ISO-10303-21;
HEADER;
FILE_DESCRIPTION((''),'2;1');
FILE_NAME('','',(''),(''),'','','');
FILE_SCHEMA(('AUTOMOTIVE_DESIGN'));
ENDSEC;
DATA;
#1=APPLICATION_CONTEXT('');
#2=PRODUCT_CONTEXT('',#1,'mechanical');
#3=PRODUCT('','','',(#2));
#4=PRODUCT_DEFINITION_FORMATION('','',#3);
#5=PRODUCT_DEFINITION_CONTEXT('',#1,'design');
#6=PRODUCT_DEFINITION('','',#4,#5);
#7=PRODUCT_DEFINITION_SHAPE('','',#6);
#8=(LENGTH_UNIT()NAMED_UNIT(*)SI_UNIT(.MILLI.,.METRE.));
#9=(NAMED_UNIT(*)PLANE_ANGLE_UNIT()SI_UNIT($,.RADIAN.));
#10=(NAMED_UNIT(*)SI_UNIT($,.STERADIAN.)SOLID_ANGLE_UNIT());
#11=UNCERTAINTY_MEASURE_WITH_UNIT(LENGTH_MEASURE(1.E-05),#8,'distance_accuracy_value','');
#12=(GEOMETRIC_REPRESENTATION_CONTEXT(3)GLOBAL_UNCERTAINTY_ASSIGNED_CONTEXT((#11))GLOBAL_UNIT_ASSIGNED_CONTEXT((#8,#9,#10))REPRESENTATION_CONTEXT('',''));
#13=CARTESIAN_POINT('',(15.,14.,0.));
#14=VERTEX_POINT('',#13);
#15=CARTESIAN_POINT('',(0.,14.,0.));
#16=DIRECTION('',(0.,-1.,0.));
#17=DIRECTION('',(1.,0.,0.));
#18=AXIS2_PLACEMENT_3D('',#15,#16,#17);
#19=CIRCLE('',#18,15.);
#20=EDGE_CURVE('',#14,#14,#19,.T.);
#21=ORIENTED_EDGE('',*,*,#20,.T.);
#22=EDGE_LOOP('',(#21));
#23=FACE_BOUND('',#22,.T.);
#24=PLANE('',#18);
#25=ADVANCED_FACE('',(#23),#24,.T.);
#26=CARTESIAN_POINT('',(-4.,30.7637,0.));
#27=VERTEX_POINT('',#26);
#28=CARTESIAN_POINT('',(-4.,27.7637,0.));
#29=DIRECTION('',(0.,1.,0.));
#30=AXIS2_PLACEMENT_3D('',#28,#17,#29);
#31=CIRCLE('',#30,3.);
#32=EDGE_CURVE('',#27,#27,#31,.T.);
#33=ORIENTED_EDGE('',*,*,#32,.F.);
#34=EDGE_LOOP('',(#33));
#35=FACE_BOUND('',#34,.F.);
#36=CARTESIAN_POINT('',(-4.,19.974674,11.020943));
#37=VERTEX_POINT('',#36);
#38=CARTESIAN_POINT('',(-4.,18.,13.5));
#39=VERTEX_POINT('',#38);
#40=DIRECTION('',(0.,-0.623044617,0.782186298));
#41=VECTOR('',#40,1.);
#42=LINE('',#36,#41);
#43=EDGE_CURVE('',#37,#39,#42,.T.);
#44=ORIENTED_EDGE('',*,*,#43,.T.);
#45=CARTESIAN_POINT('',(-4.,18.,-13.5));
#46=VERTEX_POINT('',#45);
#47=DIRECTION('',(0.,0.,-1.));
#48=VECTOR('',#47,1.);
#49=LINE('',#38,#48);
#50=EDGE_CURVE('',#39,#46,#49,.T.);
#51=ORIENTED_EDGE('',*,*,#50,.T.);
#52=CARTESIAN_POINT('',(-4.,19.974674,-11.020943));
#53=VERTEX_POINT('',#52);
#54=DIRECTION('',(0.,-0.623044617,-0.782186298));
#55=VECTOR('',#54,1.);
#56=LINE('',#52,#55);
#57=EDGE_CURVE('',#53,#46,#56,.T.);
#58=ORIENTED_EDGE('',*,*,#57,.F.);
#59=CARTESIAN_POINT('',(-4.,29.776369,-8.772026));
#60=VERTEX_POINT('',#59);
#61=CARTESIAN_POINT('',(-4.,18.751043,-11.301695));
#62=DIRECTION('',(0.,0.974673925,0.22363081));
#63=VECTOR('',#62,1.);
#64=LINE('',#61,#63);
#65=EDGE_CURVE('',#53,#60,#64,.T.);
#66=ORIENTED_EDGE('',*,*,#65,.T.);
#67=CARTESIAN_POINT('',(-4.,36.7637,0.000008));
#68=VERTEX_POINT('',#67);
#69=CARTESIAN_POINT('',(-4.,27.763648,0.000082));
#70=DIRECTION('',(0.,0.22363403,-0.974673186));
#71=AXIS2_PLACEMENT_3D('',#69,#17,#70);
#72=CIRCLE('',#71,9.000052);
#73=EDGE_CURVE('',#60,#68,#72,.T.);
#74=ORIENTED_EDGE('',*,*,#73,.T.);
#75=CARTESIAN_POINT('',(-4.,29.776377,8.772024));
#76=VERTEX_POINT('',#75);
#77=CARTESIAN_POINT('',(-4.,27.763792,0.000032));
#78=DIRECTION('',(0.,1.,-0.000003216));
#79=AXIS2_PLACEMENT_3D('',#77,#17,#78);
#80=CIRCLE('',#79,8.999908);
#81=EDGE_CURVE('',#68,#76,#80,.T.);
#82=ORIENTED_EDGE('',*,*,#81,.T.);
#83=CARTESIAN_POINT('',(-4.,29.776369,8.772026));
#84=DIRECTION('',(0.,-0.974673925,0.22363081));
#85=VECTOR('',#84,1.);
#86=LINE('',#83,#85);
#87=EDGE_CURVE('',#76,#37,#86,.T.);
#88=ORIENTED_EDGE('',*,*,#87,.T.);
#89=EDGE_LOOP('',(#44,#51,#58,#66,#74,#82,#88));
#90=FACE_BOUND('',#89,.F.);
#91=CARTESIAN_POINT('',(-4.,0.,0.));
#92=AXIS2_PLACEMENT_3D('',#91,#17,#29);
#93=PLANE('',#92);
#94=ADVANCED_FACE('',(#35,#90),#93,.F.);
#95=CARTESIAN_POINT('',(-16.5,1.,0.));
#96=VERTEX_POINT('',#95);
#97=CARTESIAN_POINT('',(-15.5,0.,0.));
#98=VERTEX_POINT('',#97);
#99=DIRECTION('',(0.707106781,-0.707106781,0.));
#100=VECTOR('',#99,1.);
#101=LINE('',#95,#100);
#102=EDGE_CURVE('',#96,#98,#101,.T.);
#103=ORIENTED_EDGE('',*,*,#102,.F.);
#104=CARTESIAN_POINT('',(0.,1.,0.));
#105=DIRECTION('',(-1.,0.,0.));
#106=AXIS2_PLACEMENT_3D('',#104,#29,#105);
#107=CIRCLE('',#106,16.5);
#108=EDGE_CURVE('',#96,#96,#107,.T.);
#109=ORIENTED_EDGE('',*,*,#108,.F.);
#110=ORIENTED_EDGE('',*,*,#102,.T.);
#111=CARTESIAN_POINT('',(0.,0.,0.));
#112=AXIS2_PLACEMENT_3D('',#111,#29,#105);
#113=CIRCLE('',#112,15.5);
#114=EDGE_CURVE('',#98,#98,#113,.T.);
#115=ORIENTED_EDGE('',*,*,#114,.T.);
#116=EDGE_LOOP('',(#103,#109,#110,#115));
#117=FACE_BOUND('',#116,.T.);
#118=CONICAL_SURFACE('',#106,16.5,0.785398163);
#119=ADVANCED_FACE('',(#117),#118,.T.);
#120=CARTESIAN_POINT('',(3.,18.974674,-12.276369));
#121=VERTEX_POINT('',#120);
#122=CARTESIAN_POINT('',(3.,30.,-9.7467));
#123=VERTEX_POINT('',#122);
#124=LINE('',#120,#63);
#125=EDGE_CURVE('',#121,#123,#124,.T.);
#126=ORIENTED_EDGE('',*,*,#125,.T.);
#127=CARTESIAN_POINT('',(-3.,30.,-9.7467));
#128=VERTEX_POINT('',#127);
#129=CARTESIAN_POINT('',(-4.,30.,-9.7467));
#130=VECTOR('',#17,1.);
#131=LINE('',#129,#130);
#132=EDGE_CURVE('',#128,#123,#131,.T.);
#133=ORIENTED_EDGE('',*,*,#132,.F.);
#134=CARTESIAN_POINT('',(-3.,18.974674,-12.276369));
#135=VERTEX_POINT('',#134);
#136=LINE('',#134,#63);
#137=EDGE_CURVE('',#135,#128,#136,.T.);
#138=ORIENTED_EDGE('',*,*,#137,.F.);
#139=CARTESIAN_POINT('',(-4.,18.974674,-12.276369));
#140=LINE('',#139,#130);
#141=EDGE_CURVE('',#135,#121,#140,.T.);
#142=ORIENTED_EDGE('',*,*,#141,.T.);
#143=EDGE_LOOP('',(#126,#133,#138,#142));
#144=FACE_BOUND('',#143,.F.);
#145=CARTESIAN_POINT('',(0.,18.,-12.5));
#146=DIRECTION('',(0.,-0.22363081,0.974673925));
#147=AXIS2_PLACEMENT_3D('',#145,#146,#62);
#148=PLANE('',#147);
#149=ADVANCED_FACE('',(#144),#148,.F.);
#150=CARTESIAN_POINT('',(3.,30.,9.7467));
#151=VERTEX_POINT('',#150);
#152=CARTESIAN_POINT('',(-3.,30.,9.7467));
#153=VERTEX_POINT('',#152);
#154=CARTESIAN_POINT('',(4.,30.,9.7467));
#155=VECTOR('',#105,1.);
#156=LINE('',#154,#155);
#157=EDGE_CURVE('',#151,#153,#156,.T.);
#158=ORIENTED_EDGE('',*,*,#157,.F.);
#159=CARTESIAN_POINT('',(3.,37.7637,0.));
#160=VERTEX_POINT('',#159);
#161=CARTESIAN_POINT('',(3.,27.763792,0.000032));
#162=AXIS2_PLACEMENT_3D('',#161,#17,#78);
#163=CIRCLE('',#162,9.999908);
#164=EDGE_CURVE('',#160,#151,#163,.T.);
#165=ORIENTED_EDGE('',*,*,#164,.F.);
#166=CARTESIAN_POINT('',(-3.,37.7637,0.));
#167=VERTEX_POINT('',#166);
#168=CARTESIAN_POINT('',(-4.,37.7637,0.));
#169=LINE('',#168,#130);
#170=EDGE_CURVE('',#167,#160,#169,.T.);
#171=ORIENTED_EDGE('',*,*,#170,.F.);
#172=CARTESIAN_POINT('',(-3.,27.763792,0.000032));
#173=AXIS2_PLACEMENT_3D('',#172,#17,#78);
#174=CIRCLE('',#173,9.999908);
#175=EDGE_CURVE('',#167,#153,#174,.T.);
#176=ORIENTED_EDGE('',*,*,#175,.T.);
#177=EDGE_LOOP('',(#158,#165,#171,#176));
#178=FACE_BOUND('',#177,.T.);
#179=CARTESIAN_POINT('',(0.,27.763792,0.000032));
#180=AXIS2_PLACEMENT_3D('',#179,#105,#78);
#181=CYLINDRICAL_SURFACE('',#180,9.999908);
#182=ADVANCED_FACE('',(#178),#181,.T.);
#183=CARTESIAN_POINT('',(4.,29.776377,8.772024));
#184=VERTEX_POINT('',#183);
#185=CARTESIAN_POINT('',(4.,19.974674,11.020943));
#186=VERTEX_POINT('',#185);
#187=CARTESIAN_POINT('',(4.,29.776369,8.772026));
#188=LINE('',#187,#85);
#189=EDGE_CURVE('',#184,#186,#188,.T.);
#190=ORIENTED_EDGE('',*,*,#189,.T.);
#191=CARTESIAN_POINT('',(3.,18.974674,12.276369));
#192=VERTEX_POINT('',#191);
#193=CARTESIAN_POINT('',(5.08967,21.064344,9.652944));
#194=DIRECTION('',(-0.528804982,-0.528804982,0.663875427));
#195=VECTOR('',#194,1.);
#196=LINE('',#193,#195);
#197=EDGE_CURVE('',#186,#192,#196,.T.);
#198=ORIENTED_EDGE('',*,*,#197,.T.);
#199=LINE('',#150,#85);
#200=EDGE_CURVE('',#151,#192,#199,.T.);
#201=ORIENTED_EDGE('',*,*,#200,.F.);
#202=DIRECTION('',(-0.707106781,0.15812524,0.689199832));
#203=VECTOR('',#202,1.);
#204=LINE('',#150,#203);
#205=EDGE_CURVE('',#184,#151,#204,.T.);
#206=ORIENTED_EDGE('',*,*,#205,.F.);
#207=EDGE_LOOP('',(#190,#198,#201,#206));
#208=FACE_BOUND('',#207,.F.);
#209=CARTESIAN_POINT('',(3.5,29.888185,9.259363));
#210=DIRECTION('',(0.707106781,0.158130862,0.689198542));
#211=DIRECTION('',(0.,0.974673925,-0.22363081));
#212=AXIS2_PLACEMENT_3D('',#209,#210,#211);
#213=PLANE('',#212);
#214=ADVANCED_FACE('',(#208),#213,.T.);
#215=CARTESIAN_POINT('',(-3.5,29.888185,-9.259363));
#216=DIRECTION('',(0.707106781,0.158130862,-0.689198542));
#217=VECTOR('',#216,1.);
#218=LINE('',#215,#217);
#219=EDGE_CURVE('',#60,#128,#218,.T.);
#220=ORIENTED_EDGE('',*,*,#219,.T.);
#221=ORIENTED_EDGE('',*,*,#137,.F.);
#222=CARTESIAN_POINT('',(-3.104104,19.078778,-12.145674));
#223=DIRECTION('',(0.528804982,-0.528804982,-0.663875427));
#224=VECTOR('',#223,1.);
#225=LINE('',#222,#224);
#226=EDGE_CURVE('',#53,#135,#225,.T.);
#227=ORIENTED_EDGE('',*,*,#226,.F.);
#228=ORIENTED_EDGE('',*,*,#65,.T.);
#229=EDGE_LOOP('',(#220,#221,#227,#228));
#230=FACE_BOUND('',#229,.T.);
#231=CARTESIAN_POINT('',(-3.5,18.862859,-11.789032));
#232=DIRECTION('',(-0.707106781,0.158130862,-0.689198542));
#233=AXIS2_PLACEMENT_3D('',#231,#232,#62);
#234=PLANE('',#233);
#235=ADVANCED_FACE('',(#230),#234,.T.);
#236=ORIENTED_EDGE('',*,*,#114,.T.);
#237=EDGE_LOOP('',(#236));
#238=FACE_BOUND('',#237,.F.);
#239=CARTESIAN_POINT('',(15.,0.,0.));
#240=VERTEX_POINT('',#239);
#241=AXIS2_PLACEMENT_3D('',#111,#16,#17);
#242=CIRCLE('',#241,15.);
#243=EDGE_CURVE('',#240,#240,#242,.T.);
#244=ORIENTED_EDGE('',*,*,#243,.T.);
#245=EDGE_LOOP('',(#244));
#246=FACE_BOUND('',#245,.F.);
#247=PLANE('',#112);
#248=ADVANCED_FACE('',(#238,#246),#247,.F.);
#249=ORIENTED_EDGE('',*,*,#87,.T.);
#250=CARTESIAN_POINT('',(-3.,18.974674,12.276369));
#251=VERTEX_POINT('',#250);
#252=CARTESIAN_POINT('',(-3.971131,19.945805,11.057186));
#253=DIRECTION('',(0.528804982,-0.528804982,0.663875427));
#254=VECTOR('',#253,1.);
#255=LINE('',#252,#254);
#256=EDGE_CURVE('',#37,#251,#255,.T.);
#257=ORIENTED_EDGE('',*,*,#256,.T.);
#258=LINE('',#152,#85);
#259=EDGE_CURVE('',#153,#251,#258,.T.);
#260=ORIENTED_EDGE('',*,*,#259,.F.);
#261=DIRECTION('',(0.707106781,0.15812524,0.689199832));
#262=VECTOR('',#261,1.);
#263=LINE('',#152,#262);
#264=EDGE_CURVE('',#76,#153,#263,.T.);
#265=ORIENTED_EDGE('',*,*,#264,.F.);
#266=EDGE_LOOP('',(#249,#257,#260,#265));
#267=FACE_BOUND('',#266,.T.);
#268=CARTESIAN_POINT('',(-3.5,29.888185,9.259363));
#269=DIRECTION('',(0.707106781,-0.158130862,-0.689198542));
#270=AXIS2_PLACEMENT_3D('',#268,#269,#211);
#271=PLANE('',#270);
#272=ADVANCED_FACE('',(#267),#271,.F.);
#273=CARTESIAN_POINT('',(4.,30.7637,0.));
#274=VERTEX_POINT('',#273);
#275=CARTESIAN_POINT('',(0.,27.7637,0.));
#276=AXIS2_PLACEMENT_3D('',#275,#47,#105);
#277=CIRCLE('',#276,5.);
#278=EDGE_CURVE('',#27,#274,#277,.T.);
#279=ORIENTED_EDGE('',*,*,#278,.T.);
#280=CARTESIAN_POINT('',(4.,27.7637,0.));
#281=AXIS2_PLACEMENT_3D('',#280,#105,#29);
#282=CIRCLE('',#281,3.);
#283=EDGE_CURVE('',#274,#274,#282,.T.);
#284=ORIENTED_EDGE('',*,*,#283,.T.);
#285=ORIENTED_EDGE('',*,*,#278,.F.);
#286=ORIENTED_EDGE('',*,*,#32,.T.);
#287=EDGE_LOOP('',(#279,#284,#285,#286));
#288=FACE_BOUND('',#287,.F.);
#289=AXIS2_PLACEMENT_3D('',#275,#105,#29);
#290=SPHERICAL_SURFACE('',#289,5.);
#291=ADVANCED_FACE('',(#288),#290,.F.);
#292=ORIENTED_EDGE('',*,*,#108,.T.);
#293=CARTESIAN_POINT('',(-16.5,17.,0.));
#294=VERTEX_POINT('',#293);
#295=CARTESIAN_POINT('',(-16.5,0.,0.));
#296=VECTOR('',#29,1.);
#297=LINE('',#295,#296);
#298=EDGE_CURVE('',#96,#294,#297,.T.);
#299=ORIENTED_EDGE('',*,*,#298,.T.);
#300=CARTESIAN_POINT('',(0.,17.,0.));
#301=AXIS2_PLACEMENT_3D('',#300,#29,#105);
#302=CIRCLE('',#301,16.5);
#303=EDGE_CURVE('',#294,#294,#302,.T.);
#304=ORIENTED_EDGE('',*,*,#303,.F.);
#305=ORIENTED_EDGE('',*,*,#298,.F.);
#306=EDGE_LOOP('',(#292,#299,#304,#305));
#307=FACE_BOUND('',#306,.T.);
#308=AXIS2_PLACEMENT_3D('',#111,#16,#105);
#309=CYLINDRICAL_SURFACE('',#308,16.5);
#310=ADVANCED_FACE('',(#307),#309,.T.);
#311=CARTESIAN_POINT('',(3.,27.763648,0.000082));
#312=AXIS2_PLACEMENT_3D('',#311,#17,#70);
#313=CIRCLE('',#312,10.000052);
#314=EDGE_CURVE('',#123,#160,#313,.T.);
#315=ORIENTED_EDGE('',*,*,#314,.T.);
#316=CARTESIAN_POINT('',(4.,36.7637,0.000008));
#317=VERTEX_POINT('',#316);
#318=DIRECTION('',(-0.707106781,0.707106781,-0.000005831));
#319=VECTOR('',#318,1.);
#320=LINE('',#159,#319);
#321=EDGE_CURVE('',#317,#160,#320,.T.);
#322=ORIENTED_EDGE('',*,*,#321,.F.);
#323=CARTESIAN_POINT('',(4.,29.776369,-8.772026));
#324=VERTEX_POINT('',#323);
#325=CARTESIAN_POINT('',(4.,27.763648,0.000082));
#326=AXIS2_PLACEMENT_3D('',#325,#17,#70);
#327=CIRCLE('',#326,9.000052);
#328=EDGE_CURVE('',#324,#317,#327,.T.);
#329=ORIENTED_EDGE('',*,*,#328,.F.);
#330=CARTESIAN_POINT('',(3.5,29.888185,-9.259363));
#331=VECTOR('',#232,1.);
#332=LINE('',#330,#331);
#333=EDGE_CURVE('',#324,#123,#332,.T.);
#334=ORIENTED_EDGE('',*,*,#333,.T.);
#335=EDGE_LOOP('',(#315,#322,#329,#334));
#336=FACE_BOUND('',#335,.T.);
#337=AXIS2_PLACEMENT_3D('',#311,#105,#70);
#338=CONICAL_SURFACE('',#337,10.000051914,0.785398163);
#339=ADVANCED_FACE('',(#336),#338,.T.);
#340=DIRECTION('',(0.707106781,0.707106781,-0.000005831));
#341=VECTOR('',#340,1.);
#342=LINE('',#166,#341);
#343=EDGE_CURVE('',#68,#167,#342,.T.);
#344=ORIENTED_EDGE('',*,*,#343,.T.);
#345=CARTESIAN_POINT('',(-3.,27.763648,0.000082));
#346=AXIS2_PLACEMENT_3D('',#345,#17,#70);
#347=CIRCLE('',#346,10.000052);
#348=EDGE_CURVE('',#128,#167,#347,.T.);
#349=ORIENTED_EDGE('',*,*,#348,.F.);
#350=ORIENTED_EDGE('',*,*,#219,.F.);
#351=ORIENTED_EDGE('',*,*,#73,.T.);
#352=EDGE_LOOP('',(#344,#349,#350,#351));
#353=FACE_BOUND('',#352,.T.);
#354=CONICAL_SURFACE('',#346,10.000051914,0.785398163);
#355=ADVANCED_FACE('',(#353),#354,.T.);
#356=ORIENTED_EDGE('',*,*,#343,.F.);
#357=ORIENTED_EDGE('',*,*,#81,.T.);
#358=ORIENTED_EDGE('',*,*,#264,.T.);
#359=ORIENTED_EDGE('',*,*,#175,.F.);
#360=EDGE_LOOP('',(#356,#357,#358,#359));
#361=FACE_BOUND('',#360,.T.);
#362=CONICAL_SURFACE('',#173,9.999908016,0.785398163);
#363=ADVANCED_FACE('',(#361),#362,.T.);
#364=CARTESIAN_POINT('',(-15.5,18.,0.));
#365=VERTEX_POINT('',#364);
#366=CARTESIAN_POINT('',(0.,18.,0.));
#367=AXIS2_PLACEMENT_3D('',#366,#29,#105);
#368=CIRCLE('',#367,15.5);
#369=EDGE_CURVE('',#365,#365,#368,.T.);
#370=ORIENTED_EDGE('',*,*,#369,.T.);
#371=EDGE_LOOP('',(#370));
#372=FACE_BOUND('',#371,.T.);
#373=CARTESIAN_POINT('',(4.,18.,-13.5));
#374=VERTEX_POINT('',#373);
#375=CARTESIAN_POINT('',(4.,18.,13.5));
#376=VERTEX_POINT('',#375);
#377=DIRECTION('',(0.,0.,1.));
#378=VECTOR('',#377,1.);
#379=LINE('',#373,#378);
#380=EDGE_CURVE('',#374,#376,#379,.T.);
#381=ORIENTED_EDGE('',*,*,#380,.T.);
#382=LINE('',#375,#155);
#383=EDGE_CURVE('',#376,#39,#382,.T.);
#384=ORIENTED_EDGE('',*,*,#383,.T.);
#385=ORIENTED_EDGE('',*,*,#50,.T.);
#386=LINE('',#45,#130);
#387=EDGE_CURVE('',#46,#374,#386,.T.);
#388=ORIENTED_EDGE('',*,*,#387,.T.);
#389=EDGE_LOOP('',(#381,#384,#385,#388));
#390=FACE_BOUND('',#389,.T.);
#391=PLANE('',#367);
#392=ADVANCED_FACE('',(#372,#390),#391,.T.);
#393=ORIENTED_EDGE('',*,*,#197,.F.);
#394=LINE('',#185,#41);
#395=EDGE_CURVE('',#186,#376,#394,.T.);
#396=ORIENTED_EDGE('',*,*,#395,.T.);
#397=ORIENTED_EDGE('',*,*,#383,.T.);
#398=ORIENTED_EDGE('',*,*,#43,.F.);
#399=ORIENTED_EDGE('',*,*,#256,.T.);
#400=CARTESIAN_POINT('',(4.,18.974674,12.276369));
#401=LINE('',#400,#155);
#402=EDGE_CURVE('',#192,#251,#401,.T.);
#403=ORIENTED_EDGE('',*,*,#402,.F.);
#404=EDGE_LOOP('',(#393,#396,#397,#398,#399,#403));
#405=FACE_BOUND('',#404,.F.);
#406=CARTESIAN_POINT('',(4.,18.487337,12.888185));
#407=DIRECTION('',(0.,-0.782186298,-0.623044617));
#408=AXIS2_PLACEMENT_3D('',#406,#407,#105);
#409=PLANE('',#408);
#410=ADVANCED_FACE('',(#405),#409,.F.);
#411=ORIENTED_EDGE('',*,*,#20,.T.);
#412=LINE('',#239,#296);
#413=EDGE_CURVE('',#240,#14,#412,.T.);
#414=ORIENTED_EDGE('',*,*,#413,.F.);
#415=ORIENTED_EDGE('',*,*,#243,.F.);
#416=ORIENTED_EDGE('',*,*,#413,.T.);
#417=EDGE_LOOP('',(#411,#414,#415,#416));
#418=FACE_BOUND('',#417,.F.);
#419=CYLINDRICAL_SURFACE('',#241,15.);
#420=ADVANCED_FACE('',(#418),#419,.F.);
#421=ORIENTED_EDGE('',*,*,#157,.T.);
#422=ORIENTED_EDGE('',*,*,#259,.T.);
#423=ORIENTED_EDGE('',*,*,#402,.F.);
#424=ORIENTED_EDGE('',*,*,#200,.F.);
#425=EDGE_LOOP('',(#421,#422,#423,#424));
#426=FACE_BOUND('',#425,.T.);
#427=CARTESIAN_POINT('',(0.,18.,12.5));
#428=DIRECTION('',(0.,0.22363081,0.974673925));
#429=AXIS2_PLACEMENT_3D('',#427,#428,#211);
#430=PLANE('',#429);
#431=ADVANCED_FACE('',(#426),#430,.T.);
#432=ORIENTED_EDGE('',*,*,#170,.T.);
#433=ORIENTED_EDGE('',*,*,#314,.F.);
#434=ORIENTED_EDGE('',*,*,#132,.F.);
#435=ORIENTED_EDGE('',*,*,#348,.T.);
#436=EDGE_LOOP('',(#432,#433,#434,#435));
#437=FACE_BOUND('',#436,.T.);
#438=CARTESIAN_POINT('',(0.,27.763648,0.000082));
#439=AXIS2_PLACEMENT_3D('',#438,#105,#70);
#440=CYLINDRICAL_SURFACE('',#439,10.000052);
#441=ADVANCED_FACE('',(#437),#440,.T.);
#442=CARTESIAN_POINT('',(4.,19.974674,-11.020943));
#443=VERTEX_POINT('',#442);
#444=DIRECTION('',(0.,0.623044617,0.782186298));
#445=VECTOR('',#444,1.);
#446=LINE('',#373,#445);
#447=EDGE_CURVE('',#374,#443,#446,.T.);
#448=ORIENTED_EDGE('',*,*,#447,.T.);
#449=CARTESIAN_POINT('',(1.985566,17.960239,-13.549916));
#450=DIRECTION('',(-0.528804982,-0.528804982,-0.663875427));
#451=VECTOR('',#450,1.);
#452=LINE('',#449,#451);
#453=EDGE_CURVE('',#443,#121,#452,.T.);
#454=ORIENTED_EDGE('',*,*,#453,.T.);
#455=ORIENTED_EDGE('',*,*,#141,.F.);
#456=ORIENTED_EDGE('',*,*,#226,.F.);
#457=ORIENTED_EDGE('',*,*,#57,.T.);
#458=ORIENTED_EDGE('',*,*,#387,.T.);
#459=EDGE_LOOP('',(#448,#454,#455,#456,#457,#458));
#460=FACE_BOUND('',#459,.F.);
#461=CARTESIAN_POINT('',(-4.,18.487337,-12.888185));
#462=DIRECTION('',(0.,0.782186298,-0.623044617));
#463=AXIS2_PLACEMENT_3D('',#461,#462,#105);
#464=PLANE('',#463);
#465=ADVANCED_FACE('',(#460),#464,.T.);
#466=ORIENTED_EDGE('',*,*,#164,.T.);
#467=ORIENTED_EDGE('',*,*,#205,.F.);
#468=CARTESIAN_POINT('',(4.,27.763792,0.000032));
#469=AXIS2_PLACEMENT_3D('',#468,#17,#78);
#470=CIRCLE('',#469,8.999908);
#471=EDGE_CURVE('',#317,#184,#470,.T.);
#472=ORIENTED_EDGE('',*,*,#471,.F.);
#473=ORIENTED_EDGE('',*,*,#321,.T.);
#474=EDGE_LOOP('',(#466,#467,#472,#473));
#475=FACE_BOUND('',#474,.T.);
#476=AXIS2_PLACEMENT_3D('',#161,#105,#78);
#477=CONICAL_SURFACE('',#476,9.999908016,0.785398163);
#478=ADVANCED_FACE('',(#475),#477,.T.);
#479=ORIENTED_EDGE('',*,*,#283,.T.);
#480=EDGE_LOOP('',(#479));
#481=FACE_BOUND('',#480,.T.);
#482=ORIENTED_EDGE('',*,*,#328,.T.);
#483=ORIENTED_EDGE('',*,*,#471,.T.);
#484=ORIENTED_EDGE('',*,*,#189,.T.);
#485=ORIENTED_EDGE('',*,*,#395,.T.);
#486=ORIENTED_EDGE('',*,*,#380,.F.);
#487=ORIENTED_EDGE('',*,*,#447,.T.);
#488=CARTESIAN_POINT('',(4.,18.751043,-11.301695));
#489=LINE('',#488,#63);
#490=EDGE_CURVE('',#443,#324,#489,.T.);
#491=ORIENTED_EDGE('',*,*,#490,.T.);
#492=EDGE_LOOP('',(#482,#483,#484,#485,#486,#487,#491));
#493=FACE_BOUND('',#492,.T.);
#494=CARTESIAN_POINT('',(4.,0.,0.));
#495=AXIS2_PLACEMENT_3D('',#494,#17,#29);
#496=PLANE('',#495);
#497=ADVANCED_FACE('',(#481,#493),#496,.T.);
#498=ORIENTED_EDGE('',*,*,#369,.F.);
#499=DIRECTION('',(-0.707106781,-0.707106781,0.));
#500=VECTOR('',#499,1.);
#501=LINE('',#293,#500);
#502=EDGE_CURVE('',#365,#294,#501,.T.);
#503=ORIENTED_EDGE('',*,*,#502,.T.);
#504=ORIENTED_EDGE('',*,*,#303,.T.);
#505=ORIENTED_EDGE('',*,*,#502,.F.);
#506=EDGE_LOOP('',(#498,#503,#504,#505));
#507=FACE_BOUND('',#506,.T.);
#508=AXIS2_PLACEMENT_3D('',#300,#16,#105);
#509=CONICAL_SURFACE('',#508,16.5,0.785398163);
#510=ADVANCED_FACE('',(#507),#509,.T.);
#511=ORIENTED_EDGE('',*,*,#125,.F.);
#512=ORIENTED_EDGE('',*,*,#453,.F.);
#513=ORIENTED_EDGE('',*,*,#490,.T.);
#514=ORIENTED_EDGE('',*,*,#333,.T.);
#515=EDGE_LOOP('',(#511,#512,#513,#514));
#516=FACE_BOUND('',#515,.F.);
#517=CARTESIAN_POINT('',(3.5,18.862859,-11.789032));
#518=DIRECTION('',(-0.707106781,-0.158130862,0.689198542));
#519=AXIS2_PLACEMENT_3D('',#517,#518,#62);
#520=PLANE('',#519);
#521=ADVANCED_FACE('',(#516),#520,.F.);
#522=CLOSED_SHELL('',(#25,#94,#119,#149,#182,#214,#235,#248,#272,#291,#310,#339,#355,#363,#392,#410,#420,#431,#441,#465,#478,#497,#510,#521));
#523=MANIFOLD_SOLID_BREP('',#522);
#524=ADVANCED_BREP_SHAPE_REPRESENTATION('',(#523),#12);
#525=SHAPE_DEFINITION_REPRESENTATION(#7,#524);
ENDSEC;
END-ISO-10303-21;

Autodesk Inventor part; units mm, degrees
ref_plane "YZ Plane" through (0, 0, 0) normal (1, 0, 0) x (0, 1, 0)
ref_plane "XZ Plane" through (0, 0, 0) normal (0, 1, 0) x (-1, 0, 0)
ref_plane "XY Plane" through (0, 0, 0) normal (0, 0, 1) x (1, 0, 0)
sketch "Boceto1" plane through (0, 0, 0) normal (0, 1, 0) x (-1, 0, 0)
  circle A0 centre (0, 0) radius 16.5
  dimension "d0" = 33
extrude "Extrusión1" add sketch "Boceto1" along normal blind 18
sketch "Boceto3" plane through (0, 0, 0) normal (1, 0, 0) x (0, 1, 0)
  line L0 (18, -16.5) -> (18, 16.5) projected
  line L1 (18, -12.5) -> (30, -9.7467)
  arc A0 (30, -9.7467) -> (37.7637, 0) centre (27.7637, 0) ccw
  line L2 (18, 0) -> (51.6641, 0)
  line L3 (18, 12.5) -> (30, 9.7467)
  arc A1 (37.7637, 0) -> (30, 9.7467) centre (27.7637, 0) ccw
  line L4 (18, 12.5) -> (18, -12.5)
  point P0 (0, 0)
  dimension "d5" = 10
  dimension "d6" = 4
  dimension "d7" = 12
extrude "Extrusión2" add sketch "Boceto3" along normal mid plane 8
sketch "Boceto4" plane through (4, 0, 0) normal (1, 0, 0) x (0, 0, -1)
  arc A0 (9.7467, 30) -> (-9.7467, 30) centre (0, 27.7637) ccw projected
  circle A1 centre (0, 27.7637) radius 3
  point P0 (0, 0)
  dimension "d10" = 6
extrude "Extrusión3" cut sketch "Boceto4" against normal through all
sketch "Boceto6" plane through (0, 0, 0) normal (0, -1, 0) x (1, 0, 0)
  circle A0 centre (0, 0) radius 15
  dimension "d14" = 30
extrude "Extrusión4" cut sketch "Boceto6" against normal blind 14
chamfer "Chaflán1" distance 1 angle 45 10 edges at (16.5, 18, 0) (16.5, 0, 0) (-4, 37.7637, 0) (-4, 24, -11.1234) (-4, 24, 11.1234) (4, 37.7637, 0) (4, 24, 11.1234) (4, 24, -11.1234) (0, 18, 12.5) (0, 18, -12.5)
sketch "Boceto7" plane through (0, 0, 0) normal (0, 0, 1) x (1, 0, 0)
  arc A0 (5, 27.7637) -> (-5, 27.7637) centre (0, 27.7637) ccw
  line L0 (4, 36.7637) -> (4, 29.7764) projected
  line L1 (-4, 29.7764) -> (-4, 36.7637) projected
  line L2 (-4, 29.7764) -> (-4, 19.9747) projected
  line L3 (4, 19.9747) -> (4, 29.7764) projected
  line L4 (4, 30.7637) -> (-4, 30.7637) projected
  line L5 (4, 24.7637) -> (-4, 24.7637) projected
  line L6 (8.3579, 27.7637) -> (-7.6994, 27.7637)
  point P0 (0, 0)
  dimension "d20" = 5
revolve "Revolución1" cut sketch "Boceto7" angle 360 about axis through (8.3579, 27.7637, 0) along (-1, 0, 0) contours L6 L3 L0 A0 | L4 A0 | L0 L3 L6 L2 L1 L4 | L1 L2 L6 A0
properties part number "shocks_fixed" material "Goma"
